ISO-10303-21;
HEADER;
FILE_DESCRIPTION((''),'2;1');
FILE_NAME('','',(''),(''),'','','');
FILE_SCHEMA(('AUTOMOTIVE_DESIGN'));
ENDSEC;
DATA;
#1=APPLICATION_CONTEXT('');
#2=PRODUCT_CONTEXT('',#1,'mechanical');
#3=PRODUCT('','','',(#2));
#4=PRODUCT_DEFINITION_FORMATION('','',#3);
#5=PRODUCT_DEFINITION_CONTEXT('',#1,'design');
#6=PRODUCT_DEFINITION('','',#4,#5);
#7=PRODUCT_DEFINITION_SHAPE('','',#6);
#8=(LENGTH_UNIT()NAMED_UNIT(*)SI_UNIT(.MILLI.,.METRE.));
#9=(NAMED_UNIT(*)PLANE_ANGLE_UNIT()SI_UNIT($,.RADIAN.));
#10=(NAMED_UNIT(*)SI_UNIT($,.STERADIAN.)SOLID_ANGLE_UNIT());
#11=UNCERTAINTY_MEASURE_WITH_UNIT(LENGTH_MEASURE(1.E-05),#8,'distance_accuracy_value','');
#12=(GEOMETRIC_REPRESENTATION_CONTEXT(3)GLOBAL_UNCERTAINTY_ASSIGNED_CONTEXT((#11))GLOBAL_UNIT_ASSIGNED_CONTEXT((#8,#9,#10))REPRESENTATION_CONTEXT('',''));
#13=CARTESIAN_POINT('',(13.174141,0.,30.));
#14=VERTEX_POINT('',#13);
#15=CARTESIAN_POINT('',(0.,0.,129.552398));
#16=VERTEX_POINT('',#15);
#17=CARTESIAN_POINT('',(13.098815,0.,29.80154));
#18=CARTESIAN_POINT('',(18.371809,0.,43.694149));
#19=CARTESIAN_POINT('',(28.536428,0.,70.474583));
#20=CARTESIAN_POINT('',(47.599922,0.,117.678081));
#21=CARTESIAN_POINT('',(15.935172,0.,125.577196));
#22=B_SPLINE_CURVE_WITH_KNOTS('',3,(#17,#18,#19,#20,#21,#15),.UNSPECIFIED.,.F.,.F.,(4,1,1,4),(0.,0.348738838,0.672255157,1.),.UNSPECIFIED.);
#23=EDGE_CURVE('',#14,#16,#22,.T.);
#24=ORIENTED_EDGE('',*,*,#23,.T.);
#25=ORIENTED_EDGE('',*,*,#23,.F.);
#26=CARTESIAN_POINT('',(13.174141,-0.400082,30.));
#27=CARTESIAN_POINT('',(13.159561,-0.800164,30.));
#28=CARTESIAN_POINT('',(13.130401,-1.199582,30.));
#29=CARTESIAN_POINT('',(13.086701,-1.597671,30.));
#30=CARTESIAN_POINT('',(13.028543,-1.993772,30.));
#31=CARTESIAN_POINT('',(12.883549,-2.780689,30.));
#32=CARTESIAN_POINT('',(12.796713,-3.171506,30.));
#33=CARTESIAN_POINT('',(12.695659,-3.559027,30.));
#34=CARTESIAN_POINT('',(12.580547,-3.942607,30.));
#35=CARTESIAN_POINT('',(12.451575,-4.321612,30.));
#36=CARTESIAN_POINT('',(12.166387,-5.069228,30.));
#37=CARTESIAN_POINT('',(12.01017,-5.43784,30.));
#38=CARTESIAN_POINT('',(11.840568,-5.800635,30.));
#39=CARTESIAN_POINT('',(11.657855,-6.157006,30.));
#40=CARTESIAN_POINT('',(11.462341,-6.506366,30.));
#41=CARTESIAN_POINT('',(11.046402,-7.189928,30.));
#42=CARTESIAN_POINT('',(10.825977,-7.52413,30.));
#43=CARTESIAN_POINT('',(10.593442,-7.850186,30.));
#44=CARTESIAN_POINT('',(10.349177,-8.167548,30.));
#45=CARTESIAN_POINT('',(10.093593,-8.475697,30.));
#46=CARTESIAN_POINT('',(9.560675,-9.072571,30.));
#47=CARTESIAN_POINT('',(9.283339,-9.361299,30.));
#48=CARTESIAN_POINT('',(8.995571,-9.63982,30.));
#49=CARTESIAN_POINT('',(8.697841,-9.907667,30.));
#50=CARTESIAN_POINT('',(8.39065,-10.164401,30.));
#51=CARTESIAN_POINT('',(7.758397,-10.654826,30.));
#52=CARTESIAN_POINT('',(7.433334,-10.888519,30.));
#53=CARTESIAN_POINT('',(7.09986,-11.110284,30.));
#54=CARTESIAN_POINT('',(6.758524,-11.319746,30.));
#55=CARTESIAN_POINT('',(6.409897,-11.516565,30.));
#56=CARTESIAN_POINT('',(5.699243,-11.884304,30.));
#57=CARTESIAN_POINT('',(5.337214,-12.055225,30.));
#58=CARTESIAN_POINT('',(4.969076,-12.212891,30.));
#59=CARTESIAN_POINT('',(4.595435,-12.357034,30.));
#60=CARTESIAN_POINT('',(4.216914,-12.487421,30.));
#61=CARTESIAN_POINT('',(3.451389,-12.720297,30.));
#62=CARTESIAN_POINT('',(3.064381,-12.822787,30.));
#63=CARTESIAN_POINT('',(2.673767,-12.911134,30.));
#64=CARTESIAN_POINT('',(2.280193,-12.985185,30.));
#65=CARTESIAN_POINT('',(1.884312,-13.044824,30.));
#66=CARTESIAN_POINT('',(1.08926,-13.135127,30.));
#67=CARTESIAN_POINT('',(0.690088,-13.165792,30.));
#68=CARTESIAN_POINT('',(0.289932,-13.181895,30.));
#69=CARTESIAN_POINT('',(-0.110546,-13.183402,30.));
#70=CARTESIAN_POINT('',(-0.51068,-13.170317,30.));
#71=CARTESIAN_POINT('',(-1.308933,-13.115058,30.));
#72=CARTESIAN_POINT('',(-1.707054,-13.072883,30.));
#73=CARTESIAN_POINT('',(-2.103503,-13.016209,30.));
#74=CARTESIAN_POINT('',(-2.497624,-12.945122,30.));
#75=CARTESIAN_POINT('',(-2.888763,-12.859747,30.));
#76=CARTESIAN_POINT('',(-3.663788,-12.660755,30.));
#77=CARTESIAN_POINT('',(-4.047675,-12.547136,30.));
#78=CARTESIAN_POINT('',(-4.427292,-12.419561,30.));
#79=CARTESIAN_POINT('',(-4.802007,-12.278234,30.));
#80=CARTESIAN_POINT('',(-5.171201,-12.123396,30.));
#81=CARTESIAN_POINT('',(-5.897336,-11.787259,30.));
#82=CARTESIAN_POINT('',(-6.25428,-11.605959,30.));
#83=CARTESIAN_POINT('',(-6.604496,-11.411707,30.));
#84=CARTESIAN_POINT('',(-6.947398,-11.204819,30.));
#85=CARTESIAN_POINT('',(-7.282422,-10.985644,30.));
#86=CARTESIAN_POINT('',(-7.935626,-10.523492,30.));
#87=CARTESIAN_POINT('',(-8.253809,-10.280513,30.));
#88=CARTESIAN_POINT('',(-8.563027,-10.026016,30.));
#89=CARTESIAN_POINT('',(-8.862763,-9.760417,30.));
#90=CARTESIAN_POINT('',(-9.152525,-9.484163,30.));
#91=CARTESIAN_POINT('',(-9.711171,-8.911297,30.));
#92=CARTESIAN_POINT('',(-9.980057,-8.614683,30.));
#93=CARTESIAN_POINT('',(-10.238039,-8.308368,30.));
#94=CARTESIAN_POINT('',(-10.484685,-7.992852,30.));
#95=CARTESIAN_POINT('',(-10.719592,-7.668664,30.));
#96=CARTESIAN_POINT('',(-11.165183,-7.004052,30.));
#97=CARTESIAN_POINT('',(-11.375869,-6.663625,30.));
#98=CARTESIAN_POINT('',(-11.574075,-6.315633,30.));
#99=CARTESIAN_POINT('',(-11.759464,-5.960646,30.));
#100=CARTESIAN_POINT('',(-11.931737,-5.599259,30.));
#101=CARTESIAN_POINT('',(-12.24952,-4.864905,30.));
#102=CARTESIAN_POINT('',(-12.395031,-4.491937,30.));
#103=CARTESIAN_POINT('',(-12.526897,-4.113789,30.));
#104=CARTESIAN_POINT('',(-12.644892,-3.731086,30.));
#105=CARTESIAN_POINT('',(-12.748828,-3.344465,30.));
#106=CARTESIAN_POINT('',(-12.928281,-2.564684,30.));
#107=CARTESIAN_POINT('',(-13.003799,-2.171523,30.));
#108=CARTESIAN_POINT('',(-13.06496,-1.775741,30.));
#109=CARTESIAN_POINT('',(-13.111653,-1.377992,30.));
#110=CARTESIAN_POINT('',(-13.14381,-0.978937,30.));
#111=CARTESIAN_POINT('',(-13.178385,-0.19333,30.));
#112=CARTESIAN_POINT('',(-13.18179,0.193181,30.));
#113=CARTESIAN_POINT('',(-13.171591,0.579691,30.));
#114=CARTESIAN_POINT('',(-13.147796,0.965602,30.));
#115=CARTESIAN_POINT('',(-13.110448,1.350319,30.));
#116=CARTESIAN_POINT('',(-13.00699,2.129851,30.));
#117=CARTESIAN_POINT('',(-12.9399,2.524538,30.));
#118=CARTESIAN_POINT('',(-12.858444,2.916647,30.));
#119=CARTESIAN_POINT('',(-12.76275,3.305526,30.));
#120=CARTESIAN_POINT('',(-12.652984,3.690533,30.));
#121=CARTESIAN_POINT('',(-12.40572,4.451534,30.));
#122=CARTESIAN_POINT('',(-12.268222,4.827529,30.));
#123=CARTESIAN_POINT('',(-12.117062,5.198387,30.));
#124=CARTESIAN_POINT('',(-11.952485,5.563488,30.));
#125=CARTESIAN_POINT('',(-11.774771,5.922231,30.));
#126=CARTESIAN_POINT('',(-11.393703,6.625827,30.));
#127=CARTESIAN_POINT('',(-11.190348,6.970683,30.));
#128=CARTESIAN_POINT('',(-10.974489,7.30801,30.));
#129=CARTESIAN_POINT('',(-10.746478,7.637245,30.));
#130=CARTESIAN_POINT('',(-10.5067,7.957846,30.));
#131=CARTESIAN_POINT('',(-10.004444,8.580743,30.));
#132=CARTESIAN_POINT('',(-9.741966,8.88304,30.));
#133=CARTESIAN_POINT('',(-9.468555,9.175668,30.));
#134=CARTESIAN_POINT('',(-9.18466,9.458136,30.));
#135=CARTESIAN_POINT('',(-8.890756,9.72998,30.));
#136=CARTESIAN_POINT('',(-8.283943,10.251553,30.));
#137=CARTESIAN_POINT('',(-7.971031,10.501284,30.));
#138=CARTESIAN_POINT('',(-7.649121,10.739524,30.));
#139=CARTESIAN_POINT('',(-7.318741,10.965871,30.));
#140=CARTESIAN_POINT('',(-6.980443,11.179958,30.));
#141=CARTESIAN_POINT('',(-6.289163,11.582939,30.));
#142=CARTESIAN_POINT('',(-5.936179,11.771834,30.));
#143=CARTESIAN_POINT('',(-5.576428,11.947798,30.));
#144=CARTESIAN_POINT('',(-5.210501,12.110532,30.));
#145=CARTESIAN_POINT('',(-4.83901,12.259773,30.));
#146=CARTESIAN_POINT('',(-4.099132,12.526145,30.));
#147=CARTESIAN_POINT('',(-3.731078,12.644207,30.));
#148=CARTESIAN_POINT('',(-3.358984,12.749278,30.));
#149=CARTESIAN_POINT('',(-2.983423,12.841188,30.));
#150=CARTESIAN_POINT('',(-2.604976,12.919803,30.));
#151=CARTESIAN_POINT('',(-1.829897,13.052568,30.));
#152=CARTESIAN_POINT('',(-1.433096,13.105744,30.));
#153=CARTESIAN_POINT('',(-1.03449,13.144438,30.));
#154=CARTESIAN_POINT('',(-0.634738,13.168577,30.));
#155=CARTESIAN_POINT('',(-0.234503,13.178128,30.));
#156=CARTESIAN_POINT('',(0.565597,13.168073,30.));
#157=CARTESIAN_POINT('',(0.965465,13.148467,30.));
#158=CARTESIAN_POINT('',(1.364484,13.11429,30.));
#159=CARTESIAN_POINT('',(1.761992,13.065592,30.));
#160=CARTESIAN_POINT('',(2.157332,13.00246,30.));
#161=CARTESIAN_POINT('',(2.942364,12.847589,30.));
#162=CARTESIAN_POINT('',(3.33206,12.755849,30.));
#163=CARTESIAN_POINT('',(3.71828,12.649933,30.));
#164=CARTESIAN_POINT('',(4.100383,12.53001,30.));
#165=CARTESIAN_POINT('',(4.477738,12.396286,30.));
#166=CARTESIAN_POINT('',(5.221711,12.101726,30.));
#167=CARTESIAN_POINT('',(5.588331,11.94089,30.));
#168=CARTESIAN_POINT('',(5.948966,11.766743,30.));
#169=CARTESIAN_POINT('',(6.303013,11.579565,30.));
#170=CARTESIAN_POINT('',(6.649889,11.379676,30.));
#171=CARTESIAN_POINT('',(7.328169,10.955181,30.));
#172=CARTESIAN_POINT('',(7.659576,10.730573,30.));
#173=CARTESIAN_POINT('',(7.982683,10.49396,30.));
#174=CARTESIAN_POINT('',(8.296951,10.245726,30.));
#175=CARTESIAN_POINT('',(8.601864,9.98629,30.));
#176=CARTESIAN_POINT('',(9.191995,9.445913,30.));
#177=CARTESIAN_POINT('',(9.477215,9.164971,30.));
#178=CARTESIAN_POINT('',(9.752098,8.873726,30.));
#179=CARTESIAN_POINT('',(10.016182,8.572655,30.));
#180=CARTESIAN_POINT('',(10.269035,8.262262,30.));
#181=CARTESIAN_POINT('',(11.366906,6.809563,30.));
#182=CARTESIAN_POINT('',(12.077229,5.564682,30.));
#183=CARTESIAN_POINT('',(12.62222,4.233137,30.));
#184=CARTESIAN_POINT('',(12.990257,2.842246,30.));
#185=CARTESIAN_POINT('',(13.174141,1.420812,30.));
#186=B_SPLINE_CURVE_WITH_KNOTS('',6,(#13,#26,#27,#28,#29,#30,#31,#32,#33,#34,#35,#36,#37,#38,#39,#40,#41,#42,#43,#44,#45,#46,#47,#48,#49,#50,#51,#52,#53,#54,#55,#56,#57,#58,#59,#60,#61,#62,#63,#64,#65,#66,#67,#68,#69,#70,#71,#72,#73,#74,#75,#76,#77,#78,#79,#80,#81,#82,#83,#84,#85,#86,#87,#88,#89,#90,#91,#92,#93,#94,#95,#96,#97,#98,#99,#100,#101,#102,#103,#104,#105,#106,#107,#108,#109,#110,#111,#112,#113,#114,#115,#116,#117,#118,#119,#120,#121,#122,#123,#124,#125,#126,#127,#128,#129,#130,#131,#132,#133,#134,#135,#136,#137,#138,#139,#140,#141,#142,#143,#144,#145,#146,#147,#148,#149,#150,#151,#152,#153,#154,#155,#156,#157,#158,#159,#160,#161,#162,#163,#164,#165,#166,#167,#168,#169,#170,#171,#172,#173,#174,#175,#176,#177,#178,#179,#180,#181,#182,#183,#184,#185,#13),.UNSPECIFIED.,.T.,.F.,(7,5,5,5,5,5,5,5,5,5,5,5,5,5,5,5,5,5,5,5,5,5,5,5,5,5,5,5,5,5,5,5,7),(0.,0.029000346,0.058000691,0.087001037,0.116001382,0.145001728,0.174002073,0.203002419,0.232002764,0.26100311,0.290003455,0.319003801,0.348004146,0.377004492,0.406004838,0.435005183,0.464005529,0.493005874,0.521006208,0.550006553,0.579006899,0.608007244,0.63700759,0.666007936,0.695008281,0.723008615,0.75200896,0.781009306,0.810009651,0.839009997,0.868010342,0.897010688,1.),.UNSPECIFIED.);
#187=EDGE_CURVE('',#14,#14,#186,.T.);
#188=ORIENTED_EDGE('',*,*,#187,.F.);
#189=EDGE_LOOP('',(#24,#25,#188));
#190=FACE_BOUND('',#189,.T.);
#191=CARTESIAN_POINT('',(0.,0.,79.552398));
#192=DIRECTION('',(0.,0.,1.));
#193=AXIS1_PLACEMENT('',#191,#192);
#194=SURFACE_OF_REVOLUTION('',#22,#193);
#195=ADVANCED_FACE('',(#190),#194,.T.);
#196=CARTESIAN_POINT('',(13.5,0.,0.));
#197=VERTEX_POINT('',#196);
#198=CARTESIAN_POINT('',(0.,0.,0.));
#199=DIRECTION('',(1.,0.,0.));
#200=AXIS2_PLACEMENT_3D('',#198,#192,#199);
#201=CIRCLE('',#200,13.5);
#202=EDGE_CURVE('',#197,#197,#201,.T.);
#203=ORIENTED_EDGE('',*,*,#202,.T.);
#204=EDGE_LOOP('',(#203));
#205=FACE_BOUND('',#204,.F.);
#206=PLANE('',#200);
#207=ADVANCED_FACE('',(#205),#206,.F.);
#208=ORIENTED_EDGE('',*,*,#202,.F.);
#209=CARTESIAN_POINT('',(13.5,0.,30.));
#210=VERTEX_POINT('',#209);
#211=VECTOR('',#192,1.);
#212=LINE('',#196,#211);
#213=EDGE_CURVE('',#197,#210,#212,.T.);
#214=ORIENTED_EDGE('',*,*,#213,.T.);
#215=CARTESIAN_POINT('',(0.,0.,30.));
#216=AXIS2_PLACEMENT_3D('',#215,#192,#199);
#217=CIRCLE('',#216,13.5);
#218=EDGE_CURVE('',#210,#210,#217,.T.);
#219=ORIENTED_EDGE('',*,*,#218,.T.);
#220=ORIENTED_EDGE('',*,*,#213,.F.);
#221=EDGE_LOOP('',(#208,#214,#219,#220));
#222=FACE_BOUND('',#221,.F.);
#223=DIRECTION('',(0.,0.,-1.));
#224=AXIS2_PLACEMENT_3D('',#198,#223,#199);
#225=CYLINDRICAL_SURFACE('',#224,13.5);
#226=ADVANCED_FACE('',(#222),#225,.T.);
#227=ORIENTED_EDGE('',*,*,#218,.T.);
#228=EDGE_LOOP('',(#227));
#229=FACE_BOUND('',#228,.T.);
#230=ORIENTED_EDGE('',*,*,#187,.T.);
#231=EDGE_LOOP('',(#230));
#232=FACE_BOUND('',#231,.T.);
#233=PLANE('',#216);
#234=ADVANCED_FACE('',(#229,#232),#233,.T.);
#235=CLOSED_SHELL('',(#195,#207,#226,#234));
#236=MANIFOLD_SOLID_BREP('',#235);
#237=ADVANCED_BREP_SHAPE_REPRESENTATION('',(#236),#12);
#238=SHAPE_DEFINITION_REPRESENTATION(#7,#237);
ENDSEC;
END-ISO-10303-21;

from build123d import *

# Parameters (mm, degrees)
F0_R     = 13.5
F1_DEPTH = 30


# Not quite as in the source:
# - a feature of the source that left no trace in its solid (it failed there, or was rolled back) is left out


with BuildPart() as f1:
    # F0 (on Top) → F1 (new body)
    with BuildSketch(Plane.XY):
        Circle(F0_R)
    extrude(amount=F1_DEPTH)

    # F2 (on Front) → F3 (revolve)
    with BuildSketch(Plane.XZ):
        with BuildLine():
            Line((0, 129.5523982495), (0, 29.5523982495))
            Line((0, 29.5523982495), (13.0988145247, 29.8015400767))
            add(Edge.make_bspline(
                [(13.0988145247, 29.8015400767), (18.3718086188, 43.6941485489), (28.5364277681, 70.4745832678), (47.5999218103, 117.6780805375), (15.9351718164, 125.5771964898), (0, 129.5523982495)],
                knots=[0, 0, 0, 0, 0.3487388383, 0.6722551572, 1, 1, 1, 1], degree=3))
        make_face()
    revolve(axis=Axis((0, 0, 79.5523982495), (0, 0, 1)))


solid = f1.part
